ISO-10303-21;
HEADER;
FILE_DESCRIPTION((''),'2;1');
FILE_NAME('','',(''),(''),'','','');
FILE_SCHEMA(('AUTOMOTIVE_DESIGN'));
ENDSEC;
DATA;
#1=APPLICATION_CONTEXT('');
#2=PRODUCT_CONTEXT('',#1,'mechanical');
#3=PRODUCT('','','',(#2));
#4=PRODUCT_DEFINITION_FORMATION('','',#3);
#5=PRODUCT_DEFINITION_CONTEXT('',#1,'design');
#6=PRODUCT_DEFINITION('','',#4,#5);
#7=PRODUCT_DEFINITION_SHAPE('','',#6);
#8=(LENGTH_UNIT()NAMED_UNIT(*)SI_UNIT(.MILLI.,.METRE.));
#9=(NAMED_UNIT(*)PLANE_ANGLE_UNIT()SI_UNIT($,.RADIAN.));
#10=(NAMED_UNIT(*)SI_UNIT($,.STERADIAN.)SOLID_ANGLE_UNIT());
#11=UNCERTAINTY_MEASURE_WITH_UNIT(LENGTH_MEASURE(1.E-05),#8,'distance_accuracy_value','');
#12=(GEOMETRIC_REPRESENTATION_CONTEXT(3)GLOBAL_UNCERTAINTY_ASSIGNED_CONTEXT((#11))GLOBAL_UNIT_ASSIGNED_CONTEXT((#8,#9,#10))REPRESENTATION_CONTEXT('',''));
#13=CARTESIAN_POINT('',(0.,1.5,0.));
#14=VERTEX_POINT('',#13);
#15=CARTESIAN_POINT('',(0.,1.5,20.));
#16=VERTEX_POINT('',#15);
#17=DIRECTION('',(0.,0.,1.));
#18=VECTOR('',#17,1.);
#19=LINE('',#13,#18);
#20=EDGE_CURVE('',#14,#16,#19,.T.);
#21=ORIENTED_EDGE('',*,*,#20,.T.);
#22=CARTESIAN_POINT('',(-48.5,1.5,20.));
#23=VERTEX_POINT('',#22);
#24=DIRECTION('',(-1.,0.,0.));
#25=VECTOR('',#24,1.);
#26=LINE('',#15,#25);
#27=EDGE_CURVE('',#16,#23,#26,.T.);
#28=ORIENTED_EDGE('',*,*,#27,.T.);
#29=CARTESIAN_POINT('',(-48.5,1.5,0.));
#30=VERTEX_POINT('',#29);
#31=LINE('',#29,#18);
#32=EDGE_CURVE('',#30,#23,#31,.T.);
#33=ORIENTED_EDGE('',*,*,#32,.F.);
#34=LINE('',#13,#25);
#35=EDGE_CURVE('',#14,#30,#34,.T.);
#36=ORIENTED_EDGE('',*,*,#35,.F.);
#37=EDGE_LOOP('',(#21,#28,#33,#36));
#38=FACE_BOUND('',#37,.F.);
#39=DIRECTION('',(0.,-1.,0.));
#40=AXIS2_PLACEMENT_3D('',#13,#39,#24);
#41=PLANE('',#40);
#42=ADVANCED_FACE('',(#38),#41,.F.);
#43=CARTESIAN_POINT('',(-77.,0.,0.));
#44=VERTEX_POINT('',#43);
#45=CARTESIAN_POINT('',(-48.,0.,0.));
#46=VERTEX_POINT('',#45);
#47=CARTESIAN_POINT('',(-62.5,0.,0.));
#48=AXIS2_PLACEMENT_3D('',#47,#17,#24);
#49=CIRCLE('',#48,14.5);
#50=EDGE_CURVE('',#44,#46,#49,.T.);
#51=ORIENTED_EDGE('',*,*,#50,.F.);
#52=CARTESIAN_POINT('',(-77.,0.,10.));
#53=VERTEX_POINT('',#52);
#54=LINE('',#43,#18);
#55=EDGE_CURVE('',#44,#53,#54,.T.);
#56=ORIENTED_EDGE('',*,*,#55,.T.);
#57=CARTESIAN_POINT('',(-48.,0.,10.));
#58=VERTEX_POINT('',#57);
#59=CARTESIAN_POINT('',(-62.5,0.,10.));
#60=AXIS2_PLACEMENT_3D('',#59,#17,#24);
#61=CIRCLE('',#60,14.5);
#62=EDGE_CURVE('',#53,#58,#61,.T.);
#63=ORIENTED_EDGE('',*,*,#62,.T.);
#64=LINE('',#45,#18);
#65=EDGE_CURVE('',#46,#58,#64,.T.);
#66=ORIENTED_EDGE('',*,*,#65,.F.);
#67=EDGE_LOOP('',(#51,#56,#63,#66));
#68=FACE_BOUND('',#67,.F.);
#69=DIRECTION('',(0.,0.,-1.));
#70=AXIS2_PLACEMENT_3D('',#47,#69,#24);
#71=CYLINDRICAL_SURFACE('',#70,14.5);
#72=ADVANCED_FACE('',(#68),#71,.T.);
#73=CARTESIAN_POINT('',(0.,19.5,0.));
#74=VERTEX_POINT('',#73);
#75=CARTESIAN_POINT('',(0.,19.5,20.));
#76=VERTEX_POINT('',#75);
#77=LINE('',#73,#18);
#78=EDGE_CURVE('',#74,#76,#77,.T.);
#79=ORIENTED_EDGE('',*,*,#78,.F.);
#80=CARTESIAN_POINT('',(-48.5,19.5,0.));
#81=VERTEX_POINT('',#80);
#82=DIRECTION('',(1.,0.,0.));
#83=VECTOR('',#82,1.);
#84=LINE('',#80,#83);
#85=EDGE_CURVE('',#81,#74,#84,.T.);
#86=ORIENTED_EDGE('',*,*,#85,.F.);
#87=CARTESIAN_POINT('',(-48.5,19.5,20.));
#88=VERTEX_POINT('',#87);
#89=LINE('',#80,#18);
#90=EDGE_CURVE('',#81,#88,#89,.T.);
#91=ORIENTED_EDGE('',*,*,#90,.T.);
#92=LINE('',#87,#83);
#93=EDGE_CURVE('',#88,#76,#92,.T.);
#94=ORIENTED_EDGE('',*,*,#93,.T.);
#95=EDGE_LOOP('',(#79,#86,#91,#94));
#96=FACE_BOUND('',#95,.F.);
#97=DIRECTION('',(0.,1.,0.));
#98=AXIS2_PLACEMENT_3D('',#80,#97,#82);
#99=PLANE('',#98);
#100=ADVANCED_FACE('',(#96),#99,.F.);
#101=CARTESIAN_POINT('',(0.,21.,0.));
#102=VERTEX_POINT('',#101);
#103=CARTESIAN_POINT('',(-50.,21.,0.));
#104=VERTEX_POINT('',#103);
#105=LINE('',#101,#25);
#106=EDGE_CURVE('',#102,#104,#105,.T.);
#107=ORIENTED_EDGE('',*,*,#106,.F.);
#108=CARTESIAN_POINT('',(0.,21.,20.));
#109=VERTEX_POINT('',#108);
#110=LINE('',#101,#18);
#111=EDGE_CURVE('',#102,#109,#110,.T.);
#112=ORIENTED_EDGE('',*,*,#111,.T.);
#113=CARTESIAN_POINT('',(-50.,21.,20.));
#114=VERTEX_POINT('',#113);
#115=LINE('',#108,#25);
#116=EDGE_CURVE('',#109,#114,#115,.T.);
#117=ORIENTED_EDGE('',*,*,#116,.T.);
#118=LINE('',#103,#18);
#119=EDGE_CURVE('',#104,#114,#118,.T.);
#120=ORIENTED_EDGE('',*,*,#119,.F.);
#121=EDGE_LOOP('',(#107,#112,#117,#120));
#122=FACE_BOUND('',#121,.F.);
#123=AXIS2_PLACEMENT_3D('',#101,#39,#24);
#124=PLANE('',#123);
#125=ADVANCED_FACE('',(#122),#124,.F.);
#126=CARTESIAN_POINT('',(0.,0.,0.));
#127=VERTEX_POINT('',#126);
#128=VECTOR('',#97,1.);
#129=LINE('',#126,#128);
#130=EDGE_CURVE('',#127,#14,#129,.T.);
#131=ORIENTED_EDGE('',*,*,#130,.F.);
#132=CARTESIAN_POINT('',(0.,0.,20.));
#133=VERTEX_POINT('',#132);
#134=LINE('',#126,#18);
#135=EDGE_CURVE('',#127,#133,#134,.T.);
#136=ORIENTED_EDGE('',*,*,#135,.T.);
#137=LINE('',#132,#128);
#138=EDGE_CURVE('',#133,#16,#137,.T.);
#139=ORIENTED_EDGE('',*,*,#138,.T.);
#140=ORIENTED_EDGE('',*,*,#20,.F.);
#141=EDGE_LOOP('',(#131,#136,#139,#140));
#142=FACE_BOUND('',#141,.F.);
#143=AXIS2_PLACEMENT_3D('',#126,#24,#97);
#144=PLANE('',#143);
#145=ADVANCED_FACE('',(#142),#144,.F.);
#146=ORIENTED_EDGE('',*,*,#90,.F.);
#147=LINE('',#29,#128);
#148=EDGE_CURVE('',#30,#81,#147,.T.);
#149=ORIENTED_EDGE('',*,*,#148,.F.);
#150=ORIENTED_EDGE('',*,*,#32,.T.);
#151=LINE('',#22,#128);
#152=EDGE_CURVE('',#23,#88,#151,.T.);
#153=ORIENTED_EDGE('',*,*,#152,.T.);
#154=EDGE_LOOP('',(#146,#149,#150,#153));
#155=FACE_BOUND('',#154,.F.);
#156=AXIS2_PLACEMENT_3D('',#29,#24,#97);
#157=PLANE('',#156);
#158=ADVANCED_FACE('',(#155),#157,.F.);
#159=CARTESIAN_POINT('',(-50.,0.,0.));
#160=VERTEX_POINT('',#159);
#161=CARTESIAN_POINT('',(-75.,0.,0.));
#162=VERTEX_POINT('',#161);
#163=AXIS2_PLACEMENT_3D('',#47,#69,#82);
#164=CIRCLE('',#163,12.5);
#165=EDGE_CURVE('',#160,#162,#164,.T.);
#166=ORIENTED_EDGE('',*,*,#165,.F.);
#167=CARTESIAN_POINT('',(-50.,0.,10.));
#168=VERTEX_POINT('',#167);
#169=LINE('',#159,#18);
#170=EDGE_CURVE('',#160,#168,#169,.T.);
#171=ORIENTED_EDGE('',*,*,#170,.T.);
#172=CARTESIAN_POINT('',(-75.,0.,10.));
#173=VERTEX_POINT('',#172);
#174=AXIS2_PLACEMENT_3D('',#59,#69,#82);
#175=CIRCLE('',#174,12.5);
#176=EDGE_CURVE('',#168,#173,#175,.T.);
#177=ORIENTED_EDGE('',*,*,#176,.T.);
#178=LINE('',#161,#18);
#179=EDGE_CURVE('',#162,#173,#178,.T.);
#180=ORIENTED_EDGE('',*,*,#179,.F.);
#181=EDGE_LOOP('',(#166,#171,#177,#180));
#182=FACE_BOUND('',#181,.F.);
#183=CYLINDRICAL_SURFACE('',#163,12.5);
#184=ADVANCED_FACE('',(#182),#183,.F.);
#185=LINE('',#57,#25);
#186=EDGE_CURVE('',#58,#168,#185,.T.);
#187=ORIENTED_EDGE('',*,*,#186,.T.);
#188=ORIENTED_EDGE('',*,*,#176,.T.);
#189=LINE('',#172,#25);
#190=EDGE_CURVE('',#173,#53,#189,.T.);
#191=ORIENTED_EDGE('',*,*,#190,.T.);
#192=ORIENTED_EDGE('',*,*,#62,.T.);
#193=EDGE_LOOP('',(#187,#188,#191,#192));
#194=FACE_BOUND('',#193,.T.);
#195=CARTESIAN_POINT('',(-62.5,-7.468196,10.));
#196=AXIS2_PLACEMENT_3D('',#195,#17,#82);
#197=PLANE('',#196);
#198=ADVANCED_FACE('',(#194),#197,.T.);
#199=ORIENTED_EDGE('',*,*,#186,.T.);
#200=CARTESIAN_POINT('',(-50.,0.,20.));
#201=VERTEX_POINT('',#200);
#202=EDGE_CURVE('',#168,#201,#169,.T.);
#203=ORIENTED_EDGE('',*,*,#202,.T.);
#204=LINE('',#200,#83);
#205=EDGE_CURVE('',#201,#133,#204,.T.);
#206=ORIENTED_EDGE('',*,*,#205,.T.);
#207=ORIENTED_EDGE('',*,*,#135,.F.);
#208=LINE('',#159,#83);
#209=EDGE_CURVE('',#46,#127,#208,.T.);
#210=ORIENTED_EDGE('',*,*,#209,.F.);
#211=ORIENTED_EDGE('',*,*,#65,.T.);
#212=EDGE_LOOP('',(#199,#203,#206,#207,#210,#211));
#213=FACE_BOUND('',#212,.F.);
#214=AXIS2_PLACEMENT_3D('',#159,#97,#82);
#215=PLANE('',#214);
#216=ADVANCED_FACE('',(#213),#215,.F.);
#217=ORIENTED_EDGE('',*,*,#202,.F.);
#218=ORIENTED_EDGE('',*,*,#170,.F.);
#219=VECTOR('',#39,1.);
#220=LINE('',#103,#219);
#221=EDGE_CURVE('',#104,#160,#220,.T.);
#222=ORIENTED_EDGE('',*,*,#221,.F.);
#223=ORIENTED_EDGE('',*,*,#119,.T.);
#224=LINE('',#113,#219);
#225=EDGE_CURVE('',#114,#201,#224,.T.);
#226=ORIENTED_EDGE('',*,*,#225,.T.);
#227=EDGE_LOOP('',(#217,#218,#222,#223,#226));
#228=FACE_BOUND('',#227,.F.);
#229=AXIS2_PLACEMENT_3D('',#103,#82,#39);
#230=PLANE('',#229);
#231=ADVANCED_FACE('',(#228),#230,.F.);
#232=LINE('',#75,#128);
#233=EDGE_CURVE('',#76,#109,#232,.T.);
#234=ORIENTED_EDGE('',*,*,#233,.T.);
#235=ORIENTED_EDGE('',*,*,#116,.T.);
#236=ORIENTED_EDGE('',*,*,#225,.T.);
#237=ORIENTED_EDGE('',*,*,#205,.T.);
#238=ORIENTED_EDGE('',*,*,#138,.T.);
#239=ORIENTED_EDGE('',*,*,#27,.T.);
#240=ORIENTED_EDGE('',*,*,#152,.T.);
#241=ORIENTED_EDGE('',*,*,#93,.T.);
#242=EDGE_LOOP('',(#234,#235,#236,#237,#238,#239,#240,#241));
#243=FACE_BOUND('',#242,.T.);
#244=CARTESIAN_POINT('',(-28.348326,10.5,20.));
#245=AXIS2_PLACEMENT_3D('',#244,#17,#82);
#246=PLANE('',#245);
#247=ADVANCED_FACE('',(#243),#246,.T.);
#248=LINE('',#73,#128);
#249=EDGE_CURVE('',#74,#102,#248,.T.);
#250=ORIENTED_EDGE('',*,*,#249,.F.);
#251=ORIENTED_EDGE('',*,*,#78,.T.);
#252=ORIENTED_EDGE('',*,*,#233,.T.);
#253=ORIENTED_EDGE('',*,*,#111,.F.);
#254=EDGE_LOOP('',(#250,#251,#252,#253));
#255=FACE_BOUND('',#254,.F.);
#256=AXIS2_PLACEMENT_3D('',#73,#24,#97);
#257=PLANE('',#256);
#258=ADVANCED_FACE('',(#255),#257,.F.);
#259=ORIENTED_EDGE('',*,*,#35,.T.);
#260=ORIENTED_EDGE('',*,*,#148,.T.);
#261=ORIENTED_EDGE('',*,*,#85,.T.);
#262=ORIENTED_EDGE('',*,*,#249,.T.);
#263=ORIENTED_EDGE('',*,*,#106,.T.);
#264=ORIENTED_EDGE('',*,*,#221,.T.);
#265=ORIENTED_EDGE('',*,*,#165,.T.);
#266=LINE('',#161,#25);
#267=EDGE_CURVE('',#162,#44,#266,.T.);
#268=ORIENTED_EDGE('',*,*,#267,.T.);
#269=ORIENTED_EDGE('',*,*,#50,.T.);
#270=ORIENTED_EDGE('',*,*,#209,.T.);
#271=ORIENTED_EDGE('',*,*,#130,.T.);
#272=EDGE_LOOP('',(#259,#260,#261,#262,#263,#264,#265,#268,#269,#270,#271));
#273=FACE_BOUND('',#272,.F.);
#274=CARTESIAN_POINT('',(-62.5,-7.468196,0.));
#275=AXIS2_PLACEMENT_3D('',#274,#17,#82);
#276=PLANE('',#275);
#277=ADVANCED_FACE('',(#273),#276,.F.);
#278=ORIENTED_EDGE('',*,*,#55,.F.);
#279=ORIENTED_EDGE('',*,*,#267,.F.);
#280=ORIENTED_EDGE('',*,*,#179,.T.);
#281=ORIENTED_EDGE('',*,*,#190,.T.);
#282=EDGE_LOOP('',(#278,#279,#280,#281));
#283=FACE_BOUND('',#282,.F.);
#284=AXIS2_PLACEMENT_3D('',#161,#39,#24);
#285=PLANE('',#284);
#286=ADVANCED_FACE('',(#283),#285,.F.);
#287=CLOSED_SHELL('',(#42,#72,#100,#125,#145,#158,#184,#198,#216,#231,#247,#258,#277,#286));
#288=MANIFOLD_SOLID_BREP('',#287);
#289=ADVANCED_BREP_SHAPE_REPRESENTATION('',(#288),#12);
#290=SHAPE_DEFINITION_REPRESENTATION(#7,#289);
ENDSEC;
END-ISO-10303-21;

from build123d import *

# Parameters (mm, degrees)
F1_DEPTH = 20
F2_DEPTH = 10


# Not quite as in the source:
# - a feature names something its author has since deleted; it is built from what else it names


with BuildPart() as f1:
    # F0 (on Top) → F1 (new body)
    with BuildSketch(Plane.XY):
        Polygon((-50, 21), (-50, 0), (-48, 0), (0, 0), (0, 1.5), (-48.5, 1.5), (-48.5, 19.5), (0, 19.5), (0, 21), align=None)
    extrude(amount=F1_DEPTH)

    # F0 (on Top) → F2 (join)
    with BuildSketch(Plane.XY):
        with BuildLine():
            ThreePointArc((-50, 0), (-62.5, -12.5), (-75, 0))
            Line((-75, 0), (-77, 0))
            ThreePointArc((-77, 0), (-62.5, -14.5), (-48, 0))
            Line((-48, 0), (-50, 0))
        make_face()
    extrude(amount=F2_DEPTH)


solid = f1.part
